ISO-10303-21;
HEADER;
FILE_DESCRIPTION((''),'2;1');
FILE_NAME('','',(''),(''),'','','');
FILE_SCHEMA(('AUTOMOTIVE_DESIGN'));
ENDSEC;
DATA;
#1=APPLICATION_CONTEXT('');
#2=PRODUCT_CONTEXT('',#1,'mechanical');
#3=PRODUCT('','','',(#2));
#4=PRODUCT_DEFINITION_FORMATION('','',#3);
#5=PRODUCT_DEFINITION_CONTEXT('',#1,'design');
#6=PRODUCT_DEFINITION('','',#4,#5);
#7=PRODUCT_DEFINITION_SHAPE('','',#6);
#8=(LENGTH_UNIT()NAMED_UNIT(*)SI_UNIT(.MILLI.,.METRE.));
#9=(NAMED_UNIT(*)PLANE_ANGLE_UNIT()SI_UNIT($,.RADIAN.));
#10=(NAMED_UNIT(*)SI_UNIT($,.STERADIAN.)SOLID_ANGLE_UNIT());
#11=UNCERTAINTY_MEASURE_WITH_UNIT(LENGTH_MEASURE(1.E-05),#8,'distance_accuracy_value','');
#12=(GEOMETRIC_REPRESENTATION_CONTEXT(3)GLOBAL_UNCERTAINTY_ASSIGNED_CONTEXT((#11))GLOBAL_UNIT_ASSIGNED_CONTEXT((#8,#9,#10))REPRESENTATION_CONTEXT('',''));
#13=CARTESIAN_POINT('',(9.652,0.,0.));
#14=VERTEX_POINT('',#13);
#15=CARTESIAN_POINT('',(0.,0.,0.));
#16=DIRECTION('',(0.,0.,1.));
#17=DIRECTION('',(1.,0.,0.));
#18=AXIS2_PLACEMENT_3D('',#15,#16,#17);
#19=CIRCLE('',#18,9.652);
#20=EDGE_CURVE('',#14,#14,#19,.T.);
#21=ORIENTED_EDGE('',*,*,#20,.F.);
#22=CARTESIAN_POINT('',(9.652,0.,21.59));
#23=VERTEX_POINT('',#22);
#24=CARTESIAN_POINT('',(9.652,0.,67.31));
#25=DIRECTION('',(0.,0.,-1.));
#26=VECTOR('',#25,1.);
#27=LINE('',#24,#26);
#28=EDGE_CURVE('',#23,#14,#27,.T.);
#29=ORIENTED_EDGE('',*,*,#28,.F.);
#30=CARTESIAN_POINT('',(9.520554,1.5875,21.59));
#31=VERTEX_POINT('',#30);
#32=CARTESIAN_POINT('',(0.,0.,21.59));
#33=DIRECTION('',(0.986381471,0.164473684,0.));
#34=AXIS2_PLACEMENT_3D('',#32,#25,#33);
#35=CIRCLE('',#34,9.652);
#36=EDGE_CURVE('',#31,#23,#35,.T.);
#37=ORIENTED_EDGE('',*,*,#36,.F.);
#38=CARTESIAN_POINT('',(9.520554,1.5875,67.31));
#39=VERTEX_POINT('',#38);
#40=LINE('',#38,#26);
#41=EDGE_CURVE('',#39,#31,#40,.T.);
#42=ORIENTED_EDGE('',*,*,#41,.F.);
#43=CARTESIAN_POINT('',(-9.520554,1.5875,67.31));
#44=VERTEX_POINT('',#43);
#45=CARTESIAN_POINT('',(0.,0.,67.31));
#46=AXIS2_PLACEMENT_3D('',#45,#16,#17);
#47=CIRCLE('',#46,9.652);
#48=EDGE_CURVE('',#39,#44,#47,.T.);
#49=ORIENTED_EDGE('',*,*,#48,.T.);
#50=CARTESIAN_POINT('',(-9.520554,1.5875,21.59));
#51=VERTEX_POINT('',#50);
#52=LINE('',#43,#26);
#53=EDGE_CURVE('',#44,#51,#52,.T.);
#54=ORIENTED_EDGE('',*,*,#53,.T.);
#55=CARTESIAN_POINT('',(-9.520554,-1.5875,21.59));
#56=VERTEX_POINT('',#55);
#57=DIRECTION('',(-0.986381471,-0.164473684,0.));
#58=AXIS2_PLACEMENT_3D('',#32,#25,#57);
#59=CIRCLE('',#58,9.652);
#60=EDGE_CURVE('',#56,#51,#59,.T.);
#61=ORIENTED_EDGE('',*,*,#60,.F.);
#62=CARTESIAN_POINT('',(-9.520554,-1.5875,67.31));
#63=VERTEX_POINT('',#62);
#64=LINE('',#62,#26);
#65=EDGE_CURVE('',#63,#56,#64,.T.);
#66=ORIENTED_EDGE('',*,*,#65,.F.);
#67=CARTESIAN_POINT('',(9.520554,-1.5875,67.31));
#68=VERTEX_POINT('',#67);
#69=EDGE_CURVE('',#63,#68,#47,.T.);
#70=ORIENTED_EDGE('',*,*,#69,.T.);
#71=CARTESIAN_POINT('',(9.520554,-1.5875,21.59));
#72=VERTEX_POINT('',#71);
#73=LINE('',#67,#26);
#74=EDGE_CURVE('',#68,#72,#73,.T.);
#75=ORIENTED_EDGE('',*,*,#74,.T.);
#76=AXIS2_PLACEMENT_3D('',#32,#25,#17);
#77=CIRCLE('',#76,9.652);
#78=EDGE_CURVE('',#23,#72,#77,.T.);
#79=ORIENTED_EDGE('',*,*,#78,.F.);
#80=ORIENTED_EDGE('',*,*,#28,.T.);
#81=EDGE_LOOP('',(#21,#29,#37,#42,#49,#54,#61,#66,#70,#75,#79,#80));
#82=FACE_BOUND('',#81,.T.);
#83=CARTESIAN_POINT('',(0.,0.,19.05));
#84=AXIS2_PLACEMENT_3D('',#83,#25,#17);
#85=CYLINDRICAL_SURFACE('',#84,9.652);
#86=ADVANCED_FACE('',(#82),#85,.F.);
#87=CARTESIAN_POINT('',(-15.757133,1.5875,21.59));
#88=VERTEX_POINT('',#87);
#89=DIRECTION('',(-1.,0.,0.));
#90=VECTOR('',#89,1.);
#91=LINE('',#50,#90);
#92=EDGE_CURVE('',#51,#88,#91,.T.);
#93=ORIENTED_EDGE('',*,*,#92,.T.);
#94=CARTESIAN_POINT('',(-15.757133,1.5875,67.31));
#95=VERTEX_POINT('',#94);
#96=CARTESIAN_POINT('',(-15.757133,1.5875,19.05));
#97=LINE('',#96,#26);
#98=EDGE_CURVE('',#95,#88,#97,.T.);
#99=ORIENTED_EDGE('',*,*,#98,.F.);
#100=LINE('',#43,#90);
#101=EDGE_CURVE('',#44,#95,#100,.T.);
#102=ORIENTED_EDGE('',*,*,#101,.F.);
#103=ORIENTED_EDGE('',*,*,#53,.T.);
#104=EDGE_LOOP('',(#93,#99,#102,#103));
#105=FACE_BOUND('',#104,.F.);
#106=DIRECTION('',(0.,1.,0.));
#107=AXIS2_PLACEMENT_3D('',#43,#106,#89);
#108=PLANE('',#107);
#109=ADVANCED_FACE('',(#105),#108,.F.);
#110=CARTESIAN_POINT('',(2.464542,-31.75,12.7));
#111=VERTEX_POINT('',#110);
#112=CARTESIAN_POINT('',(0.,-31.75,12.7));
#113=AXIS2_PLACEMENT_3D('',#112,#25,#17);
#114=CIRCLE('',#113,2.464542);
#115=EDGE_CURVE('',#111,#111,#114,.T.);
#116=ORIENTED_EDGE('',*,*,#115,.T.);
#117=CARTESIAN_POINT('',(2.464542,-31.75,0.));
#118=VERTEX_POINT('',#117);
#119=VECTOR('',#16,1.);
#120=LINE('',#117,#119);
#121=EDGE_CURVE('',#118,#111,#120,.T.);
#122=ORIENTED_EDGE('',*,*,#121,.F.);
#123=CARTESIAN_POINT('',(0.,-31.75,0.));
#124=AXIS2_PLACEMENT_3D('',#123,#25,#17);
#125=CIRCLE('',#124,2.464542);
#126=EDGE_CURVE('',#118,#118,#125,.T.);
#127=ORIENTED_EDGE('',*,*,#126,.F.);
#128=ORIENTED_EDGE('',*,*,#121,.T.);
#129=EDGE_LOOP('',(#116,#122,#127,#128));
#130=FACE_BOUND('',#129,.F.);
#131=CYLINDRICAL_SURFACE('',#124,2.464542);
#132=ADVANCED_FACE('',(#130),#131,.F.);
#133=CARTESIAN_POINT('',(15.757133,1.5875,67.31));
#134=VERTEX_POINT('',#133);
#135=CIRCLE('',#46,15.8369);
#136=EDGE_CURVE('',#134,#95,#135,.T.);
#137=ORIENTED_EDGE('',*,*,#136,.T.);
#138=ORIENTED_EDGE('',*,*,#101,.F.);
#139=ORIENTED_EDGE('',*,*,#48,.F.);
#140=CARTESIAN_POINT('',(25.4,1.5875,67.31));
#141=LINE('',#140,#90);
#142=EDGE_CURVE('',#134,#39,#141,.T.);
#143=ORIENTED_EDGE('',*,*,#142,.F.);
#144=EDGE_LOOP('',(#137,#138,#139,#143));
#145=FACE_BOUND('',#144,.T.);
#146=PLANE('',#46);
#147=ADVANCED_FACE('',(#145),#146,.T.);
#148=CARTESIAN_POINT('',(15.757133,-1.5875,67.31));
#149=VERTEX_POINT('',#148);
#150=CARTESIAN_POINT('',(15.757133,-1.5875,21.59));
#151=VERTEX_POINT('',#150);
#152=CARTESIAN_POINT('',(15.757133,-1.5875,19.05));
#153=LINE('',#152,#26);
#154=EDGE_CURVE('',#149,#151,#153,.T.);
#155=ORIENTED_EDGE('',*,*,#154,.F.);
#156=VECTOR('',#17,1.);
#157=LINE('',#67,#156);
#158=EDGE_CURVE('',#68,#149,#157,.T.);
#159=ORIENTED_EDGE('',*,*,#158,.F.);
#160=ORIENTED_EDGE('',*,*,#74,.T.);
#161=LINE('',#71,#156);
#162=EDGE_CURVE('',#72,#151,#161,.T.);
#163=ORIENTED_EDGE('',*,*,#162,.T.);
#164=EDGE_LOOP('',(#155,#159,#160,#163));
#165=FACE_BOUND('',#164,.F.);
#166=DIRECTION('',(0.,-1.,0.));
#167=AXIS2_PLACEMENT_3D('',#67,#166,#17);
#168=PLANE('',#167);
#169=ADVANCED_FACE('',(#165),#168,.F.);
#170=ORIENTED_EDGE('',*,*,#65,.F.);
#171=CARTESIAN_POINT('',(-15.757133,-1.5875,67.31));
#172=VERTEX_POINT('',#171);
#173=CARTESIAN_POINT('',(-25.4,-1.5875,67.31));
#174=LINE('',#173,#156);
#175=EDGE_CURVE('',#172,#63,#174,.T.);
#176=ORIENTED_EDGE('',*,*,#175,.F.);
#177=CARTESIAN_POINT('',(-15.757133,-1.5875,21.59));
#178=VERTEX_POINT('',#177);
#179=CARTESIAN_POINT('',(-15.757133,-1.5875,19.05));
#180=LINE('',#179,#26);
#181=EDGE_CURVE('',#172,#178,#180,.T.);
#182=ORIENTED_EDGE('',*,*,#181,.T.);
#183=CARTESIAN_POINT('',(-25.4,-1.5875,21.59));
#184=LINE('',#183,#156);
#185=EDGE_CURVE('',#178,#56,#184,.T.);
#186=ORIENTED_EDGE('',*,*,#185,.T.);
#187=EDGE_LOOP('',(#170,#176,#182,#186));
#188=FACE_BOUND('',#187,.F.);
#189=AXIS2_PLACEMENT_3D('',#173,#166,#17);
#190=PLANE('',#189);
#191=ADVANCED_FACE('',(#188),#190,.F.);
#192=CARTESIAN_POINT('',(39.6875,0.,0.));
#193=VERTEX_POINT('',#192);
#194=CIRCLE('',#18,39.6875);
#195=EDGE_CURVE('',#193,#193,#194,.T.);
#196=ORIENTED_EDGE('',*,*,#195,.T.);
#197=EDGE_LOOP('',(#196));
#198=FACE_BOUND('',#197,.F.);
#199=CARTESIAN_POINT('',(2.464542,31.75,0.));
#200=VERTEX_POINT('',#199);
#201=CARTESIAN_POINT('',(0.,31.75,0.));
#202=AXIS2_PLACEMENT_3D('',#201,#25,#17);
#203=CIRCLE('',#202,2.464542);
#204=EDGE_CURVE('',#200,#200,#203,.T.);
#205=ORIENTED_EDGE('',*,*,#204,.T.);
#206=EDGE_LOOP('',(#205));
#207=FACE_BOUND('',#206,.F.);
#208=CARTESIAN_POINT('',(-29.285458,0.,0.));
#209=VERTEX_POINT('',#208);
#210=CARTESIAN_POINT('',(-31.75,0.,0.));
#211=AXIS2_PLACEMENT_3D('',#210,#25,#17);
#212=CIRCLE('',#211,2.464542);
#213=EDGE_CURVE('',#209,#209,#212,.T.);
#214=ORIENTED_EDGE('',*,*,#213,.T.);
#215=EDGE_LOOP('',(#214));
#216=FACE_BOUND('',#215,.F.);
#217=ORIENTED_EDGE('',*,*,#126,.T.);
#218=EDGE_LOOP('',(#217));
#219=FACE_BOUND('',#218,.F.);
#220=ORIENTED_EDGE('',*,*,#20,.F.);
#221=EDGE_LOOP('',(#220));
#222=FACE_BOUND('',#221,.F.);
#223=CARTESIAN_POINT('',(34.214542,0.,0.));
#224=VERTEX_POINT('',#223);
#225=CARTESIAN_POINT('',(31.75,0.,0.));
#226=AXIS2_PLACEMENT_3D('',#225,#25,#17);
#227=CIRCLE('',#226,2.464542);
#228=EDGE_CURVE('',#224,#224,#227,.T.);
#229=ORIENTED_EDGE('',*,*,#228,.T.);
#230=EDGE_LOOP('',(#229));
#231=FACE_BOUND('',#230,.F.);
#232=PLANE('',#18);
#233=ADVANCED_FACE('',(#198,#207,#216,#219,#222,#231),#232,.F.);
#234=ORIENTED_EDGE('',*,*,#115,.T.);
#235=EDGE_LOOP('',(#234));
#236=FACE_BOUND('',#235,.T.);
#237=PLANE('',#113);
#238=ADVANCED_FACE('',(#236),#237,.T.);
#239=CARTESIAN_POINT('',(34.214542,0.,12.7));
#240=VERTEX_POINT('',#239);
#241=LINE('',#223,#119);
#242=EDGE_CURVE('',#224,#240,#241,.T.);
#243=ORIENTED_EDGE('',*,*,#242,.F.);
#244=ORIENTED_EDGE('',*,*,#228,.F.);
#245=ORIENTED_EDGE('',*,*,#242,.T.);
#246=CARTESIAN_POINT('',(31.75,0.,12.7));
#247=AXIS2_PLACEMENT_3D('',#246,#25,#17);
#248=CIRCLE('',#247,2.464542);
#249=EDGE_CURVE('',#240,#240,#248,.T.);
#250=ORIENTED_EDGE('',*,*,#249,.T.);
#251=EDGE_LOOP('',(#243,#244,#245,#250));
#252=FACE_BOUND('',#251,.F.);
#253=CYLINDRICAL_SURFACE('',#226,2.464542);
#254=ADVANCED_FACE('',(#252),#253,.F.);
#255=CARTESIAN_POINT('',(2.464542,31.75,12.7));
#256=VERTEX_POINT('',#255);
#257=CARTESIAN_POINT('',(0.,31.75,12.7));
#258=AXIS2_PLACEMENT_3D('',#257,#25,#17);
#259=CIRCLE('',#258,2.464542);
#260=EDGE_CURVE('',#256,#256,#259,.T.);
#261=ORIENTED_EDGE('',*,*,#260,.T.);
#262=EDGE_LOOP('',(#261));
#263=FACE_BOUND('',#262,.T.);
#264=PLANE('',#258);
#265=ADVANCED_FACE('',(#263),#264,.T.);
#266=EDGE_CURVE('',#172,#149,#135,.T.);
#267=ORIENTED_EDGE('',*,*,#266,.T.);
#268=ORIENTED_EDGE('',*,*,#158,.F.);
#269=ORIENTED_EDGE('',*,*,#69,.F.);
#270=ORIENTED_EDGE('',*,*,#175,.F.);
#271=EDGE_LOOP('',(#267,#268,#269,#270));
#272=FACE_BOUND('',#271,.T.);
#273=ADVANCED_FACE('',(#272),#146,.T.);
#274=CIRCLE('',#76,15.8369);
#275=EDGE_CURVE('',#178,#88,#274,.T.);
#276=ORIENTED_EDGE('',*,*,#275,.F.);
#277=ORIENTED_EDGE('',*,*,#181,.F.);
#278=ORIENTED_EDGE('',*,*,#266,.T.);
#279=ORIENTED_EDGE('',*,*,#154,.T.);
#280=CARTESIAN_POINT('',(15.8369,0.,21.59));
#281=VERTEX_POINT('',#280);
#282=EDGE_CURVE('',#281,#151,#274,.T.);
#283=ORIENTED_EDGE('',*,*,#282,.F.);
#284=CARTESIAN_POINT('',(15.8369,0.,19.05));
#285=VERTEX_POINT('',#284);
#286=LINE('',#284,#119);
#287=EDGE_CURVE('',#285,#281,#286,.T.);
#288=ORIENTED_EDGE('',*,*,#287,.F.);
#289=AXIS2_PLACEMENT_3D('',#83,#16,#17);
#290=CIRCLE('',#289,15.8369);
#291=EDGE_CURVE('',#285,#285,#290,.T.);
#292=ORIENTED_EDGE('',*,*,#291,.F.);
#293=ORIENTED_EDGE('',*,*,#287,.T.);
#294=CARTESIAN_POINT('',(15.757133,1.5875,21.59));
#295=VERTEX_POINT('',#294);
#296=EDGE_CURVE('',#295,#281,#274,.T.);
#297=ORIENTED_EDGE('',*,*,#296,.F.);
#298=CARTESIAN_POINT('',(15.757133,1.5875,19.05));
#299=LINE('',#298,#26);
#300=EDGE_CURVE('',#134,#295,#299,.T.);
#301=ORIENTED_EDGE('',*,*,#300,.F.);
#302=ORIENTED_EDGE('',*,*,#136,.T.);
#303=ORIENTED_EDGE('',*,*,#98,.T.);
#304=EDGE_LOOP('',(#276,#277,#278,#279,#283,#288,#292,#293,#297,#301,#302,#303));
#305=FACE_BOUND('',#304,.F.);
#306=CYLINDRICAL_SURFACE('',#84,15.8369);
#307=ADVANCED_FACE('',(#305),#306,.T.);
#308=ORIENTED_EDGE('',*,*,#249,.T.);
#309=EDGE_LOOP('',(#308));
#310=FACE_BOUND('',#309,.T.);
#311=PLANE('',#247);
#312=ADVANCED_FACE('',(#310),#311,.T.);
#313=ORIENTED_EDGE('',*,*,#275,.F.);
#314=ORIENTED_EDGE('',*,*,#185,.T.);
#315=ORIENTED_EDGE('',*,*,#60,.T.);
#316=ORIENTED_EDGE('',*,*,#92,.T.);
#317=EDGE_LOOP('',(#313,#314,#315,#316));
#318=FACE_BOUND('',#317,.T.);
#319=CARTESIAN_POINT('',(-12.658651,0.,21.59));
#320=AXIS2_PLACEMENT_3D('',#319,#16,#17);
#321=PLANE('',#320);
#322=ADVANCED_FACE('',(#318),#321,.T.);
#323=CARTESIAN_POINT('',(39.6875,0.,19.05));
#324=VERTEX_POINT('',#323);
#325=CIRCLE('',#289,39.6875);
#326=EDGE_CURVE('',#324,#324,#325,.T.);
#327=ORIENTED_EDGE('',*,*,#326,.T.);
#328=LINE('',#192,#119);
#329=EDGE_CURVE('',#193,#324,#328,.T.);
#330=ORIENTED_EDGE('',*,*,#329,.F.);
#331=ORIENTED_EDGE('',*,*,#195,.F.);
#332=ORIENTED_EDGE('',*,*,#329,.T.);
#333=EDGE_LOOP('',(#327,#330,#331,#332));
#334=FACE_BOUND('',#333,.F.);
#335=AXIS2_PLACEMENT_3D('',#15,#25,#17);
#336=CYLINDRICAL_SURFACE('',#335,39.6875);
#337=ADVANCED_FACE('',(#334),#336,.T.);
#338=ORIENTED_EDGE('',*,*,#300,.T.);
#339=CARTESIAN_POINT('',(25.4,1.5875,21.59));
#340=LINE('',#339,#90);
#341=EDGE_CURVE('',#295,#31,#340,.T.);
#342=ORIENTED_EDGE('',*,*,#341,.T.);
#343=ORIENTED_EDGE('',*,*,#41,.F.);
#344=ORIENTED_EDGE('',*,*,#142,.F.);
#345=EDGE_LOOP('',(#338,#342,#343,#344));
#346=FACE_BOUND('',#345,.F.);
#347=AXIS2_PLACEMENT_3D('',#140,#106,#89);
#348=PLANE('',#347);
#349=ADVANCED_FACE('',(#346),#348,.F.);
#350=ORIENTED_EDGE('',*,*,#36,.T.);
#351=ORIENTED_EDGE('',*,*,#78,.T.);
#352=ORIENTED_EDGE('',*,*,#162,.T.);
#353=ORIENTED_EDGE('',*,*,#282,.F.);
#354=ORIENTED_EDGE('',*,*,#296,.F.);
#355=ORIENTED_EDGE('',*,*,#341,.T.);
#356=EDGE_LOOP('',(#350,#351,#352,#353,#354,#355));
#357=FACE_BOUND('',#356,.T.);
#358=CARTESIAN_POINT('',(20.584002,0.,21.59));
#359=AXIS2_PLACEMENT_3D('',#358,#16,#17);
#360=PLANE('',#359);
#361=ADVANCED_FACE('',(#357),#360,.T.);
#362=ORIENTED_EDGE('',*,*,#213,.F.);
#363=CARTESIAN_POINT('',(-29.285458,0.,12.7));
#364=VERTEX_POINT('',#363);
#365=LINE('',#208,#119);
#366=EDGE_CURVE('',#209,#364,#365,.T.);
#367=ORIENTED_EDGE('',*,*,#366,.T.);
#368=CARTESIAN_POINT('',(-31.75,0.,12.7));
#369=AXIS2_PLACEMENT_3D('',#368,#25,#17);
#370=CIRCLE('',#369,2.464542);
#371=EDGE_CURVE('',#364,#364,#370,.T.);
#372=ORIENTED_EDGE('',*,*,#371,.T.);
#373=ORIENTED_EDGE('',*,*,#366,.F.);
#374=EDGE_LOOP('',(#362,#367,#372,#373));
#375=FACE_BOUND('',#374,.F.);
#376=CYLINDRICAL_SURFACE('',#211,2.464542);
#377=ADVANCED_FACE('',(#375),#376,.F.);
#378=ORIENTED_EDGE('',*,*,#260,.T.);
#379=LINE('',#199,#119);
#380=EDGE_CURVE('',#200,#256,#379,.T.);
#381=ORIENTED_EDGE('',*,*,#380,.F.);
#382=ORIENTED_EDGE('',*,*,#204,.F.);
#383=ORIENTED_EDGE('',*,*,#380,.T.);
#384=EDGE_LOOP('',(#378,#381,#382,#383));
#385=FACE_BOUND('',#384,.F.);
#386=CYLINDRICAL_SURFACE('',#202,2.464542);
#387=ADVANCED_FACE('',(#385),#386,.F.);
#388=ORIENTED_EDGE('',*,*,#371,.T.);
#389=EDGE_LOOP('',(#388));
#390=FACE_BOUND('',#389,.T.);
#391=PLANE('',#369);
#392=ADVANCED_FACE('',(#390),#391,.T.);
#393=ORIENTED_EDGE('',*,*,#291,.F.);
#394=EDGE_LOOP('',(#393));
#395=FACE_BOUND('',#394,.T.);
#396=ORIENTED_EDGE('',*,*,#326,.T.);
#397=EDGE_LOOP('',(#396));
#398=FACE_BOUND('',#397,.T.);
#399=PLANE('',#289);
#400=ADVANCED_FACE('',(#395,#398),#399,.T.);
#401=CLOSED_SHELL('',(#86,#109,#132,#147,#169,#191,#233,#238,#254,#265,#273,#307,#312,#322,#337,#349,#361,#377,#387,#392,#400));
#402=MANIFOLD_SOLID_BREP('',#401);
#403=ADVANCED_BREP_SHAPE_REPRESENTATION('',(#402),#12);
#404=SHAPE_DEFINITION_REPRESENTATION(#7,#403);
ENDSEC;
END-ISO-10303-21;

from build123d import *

# Parameters (mm, degrees)
F0_R     = 39.6875
F0_R_2   = 9.652
F1_DEPTH = 19.05
F2_R     = 15.8369
F2_R_2   = 9.652
F3_DEPTH = 48.26
F4_R     = 2.4645418127
F5_DEPTH = 12.7
F7_DEPTH = 45.72


with BuildPart() as f1:
    # F0 (on Top) → F1 (new body)
    with BuildSketch(Plane.XY):
        Circle(F0_R)
        Circle(F0_R_2, mode=Mode.SUBTRACT)
    extrude(amount=F1_DEPTH)

    # F2 (on face) → F3 (join)
    with BuildSketch(Plane.XY.offset(19.05)):
        Circle(F2_R)
        Circle(F2_R_2, mode=Mode.SUBTRACT)
    extrude(amount=F3_DEPTH)

    # F4 (on face) → F5 (cut)
    with BuildSketch(Plane(origin=(0, 0, 0), x_dir=(1, 0, 0), z_dir=(0, 0, -1))):
        with Locations((-31.75, 0)):
            Circle(F4_R)
        with Locations((0, -31.75)):
            Circle(F4_R)
        with Locations((0, 31.75)):
            Circle(F4_R)
        with Locations((31.75, 0)):
            Circle(F4_R)
    extrude(amount=-F5_DEPTH, mode=Mode.SUBTRACT)

    # F6 (on face) → F7 (cut)
    with BuildSketch(Plane.XY.offset(67.31)):
        with BuildLine():
            Line((15.757133158, -1.5875), (25.4, -1.5875))
            Line((25.4, -1.5875), (25.4, 1.5875))
            Line((25.4, 1.5875), (15.757133158, 1.5875))
            ThreePointArc((15.757133158, 1.5875), (15.8169457184, 0.7947513761), (15.8369, 0))
            ThreePointArc((15.8369, 0), (15.8169457184, -0.7947513761), (15.757133158, -1.5875))
        make_face()
        with BuildLine():
            Line((9.5205539623, -1.5875), (15.757133158, -1.5875))
            ThreePointArc((15.757133158, -1.5875), (15.8169457184, -0.7947513761), (15.8369, 0))
            ThreePointArc((15.8369, 0), (15.8169457184, 0.7947513761), (15.757133158, 1.5875))
            Line((15.757133158, 1.5875), (9.5205539623, 1.5875))
            ThreePointArc((9.5205539623, 1.5875), (9.6190823586, 0.7964663067), (9.652, 0))
            ThreePointArc((9.652, 0), (9.6190823586, -0.7964663067), (9.5205539623, -1.5875))
        make_face()
        with BuildLine():
            ThreePointArc((-15.757133158, 1.5875), (-15.8369, 0), (-15.757133158, -1.5875))
            Line((-15.757133158, -1.5875), (-9.5205539623, -1.5875))
            ThreePointArc((-9.5205539623, -1.5875), (-9.652, 0), (-9.5205539623, 1.5875))
            Line((-9.5205539623, 1.5875), (-15.757133158, 1.5875))
        make_face()
        with BuildLine():
            Line((-25.4, -1.5875), (-15.757133158, -1.5875))
            ThreePointArc((-15.757133158, -1.5875), (-15.8369, 0), (-15.757133158, 1.5875))
            Line((-15.757133158, 1.5875), (-25.4, 1.5875))
            Line((-25.4, 1.5875), (-25.4, -1.5875))
        make_face()
    extrude(amount=-F7_DEPTH, mode=Mode.SUBTRACT)


solid = f1.part
